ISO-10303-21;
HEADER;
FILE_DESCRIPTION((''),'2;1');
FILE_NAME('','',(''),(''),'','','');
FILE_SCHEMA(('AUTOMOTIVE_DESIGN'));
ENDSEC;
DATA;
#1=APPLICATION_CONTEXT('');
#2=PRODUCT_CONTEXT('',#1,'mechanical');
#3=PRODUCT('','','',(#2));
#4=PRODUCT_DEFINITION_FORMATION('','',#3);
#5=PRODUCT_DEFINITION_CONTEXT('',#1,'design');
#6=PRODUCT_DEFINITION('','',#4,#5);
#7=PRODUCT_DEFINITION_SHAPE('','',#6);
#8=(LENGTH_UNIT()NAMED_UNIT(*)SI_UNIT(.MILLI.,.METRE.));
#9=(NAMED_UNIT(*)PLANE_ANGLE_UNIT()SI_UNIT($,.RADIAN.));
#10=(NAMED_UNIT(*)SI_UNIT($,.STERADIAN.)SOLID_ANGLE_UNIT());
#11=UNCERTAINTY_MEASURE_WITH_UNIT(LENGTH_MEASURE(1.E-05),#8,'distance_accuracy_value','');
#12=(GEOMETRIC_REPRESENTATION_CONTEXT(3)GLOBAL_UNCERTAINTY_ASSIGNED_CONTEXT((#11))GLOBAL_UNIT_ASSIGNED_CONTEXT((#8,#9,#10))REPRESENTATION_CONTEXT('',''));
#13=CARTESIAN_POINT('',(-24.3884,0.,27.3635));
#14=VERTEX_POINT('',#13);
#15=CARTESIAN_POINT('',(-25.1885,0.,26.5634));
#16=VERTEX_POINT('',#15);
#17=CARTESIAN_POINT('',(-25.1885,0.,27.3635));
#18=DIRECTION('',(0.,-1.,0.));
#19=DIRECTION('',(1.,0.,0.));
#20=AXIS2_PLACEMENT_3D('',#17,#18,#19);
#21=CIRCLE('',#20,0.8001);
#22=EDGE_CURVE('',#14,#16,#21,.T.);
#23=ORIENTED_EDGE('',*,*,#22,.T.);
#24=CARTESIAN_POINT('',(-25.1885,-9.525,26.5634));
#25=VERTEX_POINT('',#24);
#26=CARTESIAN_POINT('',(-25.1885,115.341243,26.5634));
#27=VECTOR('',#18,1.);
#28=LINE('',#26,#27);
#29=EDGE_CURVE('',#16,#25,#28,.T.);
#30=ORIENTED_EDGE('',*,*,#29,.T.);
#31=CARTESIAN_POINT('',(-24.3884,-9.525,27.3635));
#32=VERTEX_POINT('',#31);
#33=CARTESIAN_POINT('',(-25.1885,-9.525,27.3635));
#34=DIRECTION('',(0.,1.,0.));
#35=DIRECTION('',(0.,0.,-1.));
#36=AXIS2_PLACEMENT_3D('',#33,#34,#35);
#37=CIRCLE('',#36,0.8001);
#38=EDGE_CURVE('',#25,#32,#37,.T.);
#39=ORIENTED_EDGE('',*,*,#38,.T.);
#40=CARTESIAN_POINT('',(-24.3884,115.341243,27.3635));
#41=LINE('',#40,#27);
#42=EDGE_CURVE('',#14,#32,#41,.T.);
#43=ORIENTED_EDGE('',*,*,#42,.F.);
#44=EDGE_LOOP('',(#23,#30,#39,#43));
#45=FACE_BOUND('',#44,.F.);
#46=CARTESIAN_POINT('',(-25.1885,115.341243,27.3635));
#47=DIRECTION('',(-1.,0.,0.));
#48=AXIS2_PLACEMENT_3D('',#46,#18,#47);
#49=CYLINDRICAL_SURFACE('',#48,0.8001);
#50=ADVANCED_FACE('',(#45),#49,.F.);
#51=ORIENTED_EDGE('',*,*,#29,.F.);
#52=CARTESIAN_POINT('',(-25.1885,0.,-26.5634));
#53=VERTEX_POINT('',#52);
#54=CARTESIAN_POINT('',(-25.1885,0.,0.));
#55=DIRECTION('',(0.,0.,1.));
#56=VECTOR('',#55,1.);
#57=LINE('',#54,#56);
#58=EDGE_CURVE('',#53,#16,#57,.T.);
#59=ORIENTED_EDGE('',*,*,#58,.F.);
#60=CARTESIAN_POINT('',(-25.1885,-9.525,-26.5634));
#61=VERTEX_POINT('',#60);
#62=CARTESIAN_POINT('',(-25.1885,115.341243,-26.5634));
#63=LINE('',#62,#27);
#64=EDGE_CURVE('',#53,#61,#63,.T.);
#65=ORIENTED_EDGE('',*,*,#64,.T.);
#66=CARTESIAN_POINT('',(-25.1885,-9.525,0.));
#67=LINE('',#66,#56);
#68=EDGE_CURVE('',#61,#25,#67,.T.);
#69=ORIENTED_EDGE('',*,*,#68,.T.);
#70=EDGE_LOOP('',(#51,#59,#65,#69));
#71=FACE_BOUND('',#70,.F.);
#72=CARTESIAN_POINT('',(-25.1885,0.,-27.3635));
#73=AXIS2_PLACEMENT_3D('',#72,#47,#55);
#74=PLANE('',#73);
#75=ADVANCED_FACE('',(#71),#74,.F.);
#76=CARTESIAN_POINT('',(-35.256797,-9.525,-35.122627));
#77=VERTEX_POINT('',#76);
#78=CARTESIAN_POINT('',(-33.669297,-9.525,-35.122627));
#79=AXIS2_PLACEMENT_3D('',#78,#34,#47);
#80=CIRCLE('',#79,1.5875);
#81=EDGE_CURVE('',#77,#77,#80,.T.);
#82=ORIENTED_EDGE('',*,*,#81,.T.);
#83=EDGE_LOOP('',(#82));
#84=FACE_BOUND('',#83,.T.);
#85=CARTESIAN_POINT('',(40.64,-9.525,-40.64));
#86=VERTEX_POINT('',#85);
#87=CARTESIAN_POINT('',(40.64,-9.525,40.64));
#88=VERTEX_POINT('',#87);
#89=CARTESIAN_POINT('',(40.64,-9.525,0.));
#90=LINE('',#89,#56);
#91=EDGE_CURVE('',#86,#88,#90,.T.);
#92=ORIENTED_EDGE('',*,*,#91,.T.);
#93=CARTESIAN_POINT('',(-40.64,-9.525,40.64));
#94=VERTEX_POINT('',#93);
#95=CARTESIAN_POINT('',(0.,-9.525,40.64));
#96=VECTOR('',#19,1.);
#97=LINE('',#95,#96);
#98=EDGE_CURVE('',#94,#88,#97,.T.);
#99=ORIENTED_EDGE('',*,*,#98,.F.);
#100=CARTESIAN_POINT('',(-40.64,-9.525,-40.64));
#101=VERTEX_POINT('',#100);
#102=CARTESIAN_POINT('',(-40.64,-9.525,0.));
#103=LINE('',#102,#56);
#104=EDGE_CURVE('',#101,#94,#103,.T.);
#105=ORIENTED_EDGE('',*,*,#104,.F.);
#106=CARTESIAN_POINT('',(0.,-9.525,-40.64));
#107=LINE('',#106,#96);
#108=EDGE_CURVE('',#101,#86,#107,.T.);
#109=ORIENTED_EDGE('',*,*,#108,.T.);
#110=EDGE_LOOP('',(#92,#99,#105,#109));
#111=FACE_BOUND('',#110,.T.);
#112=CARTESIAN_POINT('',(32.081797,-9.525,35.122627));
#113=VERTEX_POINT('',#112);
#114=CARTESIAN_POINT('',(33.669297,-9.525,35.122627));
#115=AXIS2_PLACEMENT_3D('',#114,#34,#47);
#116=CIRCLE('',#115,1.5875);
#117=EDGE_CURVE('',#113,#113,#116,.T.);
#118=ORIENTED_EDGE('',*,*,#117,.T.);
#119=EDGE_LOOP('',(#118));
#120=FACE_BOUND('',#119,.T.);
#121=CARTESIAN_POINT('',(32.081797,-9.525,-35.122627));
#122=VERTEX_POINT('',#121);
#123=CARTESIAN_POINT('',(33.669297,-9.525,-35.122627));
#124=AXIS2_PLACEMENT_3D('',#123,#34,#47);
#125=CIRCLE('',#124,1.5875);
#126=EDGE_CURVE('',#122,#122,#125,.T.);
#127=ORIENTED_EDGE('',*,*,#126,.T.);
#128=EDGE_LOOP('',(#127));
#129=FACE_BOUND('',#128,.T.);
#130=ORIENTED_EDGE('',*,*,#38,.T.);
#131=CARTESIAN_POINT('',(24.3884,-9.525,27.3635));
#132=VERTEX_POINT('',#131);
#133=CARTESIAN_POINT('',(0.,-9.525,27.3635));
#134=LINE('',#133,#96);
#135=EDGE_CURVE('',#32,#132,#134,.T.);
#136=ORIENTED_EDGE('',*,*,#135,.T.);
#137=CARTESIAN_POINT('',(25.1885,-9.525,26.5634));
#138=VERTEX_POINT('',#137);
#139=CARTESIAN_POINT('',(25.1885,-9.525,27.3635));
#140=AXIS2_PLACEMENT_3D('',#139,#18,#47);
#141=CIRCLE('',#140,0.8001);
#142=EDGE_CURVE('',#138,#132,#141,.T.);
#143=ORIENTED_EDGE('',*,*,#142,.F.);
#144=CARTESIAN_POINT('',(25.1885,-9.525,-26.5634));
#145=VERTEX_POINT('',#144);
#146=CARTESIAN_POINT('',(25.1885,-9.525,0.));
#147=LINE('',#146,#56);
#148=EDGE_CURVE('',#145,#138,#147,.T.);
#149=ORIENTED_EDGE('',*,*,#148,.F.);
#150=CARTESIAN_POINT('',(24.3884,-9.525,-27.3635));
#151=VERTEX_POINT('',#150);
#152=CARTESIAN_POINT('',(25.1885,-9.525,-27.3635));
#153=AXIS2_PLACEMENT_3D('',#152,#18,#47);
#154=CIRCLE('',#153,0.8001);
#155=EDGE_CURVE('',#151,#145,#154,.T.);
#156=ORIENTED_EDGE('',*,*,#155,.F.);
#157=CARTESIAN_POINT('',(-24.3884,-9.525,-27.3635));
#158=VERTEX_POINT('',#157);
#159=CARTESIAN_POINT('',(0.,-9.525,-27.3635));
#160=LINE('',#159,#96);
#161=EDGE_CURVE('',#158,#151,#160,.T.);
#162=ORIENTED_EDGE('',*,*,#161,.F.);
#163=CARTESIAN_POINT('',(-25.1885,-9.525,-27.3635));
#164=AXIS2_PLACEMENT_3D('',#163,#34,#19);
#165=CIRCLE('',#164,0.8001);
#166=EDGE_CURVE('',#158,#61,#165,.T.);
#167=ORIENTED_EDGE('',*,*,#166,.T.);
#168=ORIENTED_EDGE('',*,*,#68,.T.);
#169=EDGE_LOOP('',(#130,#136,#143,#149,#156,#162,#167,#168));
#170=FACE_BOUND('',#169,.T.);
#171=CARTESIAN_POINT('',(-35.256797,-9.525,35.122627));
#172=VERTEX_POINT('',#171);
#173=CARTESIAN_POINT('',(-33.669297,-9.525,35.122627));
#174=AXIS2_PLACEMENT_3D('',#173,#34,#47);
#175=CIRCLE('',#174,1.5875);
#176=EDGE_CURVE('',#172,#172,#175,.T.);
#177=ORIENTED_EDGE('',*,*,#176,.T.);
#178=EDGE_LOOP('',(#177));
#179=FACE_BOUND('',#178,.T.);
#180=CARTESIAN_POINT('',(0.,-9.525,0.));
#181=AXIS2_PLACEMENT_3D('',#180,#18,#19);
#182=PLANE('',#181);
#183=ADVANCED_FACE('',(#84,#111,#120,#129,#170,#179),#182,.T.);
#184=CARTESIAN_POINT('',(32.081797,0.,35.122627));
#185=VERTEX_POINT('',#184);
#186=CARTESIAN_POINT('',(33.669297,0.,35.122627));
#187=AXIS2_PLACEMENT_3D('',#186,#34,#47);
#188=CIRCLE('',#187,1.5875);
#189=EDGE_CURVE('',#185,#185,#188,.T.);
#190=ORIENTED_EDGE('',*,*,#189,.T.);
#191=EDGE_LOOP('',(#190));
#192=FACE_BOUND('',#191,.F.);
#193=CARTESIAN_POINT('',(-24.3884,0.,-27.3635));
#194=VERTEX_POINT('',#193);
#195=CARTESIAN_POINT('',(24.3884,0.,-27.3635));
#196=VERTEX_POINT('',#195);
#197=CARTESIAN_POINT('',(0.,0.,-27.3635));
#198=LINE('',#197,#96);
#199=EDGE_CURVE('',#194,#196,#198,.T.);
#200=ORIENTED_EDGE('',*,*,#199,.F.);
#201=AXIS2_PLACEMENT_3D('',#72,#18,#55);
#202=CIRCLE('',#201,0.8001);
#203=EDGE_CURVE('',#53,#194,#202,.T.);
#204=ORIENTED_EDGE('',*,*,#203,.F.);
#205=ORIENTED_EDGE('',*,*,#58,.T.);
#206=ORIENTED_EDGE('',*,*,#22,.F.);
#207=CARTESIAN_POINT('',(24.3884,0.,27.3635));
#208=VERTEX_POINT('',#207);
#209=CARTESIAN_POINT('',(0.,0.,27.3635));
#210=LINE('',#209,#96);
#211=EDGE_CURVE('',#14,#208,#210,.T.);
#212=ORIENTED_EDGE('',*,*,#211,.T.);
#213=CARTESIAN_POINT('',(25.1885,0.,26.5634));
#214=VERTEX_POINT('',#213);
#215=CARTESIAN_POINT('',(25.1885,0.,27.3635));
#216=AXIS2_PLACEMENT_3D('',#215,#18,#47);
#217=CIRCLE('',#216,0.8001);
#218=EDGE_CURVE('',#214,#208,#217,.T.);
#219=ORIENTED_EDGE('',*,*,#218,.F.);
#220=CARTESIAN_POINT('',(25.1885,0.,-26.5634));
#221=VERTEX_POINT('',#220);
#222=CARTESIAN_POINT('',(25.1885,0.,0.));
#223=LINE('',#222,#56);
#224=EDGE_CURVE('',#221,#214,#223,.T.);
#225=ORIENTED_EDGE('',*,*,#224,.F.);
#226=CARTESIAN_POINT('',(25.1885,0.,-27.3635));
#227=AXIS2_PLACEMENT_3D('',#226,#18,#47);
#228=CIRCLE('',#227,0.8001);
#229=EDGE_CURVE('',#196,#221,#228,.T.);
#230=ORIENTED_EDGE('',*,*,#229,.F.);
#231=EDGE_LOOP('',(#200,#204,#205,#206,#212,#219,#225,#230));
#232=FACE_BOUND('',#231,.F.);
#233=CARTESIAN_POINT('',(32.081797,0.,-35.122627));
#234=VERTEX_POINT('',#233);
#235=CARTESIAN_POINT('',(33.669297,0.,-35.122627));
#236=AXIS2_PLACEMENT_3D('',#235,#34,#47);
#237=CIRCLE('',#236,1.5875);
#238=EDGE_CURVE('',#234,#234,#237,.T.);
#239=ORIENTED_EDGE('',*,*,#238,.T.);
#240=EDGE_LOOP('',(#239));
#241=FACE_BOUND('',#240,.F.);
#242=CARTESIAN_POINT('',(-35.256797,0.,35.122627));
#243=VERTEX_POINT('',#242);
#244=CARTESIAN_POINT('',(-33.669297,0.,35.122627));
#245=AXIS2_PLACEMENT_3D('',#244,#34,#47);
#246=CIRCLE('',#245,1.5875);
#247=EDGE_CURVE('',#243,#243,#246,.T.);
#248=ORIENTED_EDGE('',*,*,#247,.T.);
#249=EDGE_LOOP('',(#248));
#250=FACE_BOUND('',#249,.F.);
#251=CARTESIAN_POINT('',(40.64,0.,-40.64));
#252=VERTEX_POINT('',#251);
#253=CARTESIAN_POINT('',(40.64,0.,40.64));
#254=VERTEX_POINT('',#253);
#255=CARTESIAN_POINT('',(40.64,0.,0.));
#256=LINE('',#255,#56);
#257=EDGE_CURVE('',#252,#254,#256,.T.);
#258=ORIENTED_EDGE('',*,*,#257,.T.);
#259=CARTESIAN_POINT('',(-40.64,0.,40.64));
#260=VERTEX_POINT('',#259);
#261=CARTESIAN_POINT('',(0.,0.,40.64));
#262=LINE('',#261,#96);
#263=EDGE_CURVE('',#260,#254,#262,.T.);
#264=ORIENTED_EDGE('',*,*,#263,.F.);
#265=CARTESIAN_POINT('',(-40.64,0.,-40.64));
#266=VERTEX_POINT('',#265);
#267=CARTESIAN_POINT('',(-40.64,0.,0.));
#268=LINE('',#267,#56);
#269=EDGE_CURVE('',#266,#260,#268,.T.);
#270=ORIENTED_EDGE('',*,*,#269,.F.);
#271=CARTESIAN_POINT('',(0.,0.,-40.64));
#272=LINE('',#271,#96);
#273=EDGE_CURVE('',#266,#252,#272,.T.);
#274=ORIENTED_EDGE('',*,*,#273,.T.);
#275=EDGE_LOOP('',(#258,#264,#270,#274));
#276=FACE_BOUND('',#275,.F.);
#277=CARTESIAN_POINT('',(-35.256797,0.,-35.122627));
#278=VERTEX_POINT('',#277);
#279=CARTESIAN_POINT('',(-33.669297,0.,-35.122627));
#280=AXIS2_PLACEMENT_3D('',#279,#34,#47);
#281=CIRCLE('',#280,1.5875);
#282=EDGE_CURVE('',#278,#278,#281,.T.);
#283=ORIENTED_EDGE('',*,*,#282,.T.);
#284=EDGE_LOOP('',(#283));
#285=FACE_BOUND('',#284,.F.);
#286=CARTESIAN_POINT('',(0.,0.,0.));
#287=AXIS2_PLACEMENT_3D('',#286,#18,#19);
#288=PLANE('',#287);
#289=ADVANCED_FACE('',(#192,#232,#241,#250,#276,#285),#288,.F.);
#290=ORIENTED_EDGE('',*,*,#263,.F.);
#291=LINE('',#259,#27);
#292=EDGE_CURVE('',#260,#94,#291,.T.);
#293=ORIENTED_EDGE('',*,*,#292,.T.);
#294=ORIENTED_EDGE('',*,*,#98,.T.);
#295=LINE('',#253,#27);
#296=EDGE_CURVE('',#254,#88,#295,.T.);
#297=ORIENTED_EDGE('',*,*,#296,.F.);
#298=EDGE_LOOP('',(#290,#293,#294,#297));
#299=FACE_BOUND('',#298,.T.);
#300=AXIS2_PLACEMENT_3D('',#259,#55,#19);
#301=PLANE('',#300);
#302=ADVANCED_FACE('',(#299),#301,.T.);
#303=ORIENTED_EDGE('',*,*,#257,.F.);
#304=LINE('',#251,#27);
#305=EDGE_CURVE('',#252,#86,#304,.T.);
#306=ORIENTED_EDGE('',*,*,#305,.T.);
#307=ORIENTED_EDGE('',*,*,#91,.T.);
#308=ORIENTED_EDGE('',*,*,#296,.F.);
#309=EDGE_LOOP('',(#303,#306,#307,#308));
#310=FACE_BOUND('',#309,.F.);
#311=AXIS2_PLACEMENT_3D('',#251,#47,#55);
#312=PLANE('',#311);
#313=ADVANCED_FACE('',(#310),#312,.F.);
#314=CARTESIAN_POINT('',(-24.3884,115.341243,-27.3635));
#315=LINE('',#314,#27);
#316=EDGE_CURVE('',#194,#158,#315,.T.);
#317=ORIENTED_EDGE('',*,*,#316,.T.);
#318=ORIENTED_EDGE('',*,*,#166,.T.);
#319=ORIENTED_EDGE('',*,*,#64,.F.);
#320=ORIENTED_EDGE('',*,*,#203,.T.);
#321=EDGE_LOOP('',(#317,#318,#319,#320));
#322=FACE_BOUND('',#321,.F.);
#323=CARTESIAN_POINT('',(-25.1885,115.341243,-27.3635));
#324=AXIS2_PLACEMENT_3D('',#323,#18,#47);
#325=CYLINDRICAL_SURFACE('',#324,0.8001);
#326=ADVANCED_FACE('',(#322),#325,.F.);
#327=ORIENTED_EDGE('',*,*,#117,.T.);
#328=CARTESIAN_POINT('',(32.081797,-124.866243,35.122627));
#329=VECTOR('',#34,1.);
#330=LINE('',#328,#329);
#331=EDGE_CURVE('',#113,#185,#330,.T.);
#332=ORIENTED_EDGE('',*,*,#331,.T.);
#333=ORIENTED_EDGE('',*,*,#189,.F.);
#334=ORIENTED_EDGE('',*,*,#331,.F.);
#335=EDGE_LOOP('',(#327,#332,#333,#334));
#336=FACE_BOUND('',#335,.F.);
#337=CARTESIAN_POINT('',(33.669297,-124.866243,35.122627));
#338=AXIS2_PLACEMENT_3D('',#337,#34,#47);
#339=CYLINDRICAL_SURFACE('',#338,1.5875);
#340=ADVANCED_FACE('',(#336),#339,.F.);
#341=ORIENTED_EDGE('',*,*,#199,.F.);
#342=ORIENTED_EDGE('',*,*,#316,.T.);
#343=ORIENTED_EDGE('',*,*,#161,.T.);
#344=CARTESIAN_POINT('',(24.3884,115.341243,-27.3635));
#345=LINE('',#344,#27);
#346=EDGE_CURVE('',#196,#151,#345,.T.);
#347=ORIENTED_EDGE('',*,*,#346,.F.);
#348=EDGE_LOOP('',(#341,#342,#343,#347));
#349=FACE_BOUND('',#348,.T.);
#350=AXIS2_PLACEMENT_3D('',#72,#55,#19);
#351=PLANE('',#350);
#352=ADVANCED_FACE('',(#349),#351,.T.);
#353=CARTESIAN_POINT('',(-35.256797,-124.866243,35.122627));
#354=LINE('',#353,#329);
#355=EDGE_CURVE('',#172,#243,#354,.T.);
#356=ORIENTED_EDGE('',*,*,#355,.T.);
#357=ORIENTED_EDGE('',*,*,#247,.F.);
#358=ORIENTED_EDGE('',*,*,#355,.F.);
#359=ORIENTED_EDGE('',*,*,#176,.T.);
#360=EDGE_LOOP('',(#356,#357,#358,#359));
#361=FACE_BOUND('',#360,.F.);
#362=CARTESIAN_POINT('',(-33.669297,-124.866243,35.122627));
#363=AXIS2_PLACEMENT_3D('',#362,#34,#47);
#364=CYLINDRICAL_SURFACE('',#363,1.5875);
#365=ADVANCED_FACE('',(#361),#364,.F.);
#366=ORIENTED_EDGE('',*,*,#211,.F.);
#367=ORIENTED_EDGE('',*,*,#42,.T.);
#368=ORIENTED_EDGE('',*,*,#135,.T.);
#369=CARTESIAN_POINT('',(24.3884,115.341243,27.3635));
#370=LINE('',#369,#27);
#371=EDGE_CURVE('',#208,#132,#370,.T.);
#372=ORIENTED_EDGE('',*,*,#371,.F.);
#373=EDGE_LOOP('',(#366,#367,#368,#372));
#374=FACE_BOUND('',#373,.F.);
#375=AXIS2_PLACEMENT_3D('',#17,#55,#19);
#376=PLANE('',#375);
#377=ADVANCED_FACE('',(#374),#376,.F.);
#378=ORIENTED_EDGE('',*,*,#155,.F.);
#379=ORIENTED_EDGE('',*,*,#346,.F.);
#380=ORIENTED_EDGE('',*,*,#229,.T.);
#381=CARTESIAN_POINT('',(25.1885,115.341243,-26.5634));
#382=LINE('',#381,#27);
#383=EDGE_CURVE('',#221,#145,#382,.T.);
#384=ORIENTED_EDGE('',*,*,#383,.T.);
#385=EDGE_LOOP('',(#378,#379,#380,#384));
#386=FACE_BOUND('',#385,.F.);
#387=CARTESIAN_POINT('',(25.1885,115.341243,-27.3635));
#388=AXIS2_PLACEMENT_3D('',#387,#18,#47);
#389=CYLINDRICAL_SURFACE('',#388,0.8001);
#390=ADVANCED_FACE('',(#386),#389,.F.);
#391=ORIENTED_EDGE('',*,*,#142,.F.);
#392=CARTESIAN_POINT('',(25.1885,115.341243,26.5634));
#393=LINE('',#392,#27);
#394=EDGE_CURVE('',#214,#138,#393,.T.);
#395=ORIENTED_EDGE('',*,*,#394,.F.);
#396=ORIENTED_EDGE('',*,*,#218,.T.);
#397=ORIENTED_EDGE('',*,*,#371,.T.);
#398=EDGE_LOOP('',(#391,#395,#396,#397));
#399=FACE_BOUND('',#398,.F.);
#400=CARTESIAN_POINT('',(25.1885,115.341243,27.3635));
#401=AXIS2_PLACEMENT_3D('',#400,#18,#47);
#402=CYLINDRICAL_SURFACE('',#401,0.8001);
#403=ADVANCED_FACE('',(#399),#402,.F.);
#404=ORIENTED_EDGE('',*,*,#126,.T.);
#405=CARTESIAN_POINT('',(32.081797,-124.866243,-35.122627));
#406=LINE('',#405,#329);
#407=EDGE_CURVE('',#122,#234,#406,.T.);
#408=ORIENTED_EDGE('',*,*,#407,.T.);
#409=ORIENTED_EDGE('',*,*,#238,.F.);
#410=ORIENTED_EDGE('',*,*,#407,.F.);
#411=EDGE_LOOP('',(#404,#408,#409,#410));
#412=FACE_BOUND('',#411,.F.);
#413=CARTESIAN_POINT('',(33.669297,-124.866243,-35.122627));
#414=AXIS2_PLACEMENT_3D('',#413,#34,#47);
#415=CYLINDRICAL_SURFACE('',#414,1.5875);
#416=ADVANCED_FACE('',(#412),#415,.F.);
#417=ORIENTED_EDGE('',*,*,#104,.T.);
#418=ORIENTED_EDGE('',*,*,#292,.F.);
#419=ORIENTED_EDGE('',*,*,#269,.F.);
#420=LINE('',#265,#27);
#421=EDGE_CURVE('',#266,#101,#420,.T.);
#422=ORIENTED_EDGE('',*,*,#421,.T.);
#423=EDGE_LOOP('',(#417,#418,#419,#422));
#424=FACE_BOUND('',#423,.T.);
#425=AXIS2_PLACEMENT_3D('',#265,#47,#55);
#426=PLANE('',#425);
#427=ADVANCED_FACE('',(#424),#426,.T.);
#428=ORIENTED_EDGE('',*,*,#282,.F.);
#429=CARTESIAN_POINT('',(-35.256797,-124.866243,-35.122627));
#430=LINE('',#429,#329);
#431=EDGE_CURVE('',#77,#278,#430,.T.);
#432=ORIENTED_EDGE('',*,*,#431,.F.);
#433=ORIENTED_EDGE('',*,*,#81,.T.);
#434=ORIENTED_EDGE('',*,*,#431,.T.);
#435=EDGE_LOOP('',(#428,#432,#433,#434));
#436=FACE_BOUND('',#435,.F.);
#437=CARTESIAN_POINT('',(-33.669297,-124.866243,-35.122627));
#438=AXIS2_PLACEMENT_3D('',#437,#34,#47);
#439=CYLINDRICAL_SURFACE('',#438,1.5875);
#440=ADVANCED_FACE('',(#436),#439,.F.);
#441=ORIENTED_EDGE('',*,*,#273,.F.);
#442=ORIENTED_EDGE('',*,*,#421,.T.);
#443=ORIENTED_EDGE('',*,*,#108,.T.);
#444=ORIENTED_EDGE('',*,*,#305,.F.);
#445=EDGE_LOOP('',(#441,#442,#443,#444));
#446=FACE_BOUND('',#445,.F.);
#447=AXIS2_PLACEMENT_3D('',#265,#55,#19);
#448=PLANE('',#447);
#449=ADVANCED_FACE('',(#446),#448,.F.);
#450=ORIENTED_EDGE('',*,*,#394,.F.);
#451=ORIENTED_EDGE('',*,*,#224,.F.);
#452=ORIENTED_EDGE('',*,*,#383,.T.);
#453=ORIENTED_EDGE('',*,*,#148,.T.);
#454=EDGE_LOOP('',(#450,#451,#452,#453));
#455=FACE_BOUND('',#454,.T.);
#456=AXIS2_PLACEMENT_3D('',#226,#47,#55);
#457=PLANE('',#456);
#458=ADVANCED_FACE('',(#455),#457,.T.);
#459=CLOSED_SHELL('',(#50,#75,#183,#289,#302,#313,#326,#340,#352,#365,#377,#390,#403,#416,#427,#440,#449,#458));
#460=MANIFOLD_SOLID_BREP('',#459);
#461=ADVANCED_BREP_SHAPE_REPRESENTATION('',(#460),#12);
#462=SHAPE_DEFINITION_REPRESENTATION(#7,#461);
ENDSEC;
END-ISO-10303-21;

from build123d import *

# Parameters (mm, degrees)
F0_W     = 81.28
F0_H     = 81.28
F0_W_2   = 50.377
F0_H_2   = 54.727
F1_DEPTH = 9.525
F3_D     = 3.175
F4_D     = 1.6002


# Not quite as in the source:
# - a feature names something its author has since deleted; it is built from what else it names


with BuildPart() as f1:
    # F0 (on Front) → F1 (new body)
    with BuildSketch(Plane.XZ):
        Rectangle(F0_W, F0_H)
        Rectangle(F0_W_2, F0_H_2, mode=Mode.SUBTRACT)
    extrude(amount=F1_DEPTH)

    # F3 (through all)
    with Locations(Plane.XZ.offset(9.525)):
        with Locations((-33.6692971992, 35.1226272138), (33.6692971992, 35.1226272138), (-33.6692971992, -35.1226272138), (33.6692971992, -35.1226272138)):
            Hole(F3_D / 2)

    # F4 (through all)
    with Locations(Plane(origin=(0, 0, 0), x_dir=(1, 0, 0), z_dir=(0, 1, 0))):
        with Locations((25.1885, -27.3635), (-25.1885, -27.3635), (-25.1885, 27.3635), (25.1885, 27.3635)):
            Hole(F4_D / 2)


solid = f1.part
